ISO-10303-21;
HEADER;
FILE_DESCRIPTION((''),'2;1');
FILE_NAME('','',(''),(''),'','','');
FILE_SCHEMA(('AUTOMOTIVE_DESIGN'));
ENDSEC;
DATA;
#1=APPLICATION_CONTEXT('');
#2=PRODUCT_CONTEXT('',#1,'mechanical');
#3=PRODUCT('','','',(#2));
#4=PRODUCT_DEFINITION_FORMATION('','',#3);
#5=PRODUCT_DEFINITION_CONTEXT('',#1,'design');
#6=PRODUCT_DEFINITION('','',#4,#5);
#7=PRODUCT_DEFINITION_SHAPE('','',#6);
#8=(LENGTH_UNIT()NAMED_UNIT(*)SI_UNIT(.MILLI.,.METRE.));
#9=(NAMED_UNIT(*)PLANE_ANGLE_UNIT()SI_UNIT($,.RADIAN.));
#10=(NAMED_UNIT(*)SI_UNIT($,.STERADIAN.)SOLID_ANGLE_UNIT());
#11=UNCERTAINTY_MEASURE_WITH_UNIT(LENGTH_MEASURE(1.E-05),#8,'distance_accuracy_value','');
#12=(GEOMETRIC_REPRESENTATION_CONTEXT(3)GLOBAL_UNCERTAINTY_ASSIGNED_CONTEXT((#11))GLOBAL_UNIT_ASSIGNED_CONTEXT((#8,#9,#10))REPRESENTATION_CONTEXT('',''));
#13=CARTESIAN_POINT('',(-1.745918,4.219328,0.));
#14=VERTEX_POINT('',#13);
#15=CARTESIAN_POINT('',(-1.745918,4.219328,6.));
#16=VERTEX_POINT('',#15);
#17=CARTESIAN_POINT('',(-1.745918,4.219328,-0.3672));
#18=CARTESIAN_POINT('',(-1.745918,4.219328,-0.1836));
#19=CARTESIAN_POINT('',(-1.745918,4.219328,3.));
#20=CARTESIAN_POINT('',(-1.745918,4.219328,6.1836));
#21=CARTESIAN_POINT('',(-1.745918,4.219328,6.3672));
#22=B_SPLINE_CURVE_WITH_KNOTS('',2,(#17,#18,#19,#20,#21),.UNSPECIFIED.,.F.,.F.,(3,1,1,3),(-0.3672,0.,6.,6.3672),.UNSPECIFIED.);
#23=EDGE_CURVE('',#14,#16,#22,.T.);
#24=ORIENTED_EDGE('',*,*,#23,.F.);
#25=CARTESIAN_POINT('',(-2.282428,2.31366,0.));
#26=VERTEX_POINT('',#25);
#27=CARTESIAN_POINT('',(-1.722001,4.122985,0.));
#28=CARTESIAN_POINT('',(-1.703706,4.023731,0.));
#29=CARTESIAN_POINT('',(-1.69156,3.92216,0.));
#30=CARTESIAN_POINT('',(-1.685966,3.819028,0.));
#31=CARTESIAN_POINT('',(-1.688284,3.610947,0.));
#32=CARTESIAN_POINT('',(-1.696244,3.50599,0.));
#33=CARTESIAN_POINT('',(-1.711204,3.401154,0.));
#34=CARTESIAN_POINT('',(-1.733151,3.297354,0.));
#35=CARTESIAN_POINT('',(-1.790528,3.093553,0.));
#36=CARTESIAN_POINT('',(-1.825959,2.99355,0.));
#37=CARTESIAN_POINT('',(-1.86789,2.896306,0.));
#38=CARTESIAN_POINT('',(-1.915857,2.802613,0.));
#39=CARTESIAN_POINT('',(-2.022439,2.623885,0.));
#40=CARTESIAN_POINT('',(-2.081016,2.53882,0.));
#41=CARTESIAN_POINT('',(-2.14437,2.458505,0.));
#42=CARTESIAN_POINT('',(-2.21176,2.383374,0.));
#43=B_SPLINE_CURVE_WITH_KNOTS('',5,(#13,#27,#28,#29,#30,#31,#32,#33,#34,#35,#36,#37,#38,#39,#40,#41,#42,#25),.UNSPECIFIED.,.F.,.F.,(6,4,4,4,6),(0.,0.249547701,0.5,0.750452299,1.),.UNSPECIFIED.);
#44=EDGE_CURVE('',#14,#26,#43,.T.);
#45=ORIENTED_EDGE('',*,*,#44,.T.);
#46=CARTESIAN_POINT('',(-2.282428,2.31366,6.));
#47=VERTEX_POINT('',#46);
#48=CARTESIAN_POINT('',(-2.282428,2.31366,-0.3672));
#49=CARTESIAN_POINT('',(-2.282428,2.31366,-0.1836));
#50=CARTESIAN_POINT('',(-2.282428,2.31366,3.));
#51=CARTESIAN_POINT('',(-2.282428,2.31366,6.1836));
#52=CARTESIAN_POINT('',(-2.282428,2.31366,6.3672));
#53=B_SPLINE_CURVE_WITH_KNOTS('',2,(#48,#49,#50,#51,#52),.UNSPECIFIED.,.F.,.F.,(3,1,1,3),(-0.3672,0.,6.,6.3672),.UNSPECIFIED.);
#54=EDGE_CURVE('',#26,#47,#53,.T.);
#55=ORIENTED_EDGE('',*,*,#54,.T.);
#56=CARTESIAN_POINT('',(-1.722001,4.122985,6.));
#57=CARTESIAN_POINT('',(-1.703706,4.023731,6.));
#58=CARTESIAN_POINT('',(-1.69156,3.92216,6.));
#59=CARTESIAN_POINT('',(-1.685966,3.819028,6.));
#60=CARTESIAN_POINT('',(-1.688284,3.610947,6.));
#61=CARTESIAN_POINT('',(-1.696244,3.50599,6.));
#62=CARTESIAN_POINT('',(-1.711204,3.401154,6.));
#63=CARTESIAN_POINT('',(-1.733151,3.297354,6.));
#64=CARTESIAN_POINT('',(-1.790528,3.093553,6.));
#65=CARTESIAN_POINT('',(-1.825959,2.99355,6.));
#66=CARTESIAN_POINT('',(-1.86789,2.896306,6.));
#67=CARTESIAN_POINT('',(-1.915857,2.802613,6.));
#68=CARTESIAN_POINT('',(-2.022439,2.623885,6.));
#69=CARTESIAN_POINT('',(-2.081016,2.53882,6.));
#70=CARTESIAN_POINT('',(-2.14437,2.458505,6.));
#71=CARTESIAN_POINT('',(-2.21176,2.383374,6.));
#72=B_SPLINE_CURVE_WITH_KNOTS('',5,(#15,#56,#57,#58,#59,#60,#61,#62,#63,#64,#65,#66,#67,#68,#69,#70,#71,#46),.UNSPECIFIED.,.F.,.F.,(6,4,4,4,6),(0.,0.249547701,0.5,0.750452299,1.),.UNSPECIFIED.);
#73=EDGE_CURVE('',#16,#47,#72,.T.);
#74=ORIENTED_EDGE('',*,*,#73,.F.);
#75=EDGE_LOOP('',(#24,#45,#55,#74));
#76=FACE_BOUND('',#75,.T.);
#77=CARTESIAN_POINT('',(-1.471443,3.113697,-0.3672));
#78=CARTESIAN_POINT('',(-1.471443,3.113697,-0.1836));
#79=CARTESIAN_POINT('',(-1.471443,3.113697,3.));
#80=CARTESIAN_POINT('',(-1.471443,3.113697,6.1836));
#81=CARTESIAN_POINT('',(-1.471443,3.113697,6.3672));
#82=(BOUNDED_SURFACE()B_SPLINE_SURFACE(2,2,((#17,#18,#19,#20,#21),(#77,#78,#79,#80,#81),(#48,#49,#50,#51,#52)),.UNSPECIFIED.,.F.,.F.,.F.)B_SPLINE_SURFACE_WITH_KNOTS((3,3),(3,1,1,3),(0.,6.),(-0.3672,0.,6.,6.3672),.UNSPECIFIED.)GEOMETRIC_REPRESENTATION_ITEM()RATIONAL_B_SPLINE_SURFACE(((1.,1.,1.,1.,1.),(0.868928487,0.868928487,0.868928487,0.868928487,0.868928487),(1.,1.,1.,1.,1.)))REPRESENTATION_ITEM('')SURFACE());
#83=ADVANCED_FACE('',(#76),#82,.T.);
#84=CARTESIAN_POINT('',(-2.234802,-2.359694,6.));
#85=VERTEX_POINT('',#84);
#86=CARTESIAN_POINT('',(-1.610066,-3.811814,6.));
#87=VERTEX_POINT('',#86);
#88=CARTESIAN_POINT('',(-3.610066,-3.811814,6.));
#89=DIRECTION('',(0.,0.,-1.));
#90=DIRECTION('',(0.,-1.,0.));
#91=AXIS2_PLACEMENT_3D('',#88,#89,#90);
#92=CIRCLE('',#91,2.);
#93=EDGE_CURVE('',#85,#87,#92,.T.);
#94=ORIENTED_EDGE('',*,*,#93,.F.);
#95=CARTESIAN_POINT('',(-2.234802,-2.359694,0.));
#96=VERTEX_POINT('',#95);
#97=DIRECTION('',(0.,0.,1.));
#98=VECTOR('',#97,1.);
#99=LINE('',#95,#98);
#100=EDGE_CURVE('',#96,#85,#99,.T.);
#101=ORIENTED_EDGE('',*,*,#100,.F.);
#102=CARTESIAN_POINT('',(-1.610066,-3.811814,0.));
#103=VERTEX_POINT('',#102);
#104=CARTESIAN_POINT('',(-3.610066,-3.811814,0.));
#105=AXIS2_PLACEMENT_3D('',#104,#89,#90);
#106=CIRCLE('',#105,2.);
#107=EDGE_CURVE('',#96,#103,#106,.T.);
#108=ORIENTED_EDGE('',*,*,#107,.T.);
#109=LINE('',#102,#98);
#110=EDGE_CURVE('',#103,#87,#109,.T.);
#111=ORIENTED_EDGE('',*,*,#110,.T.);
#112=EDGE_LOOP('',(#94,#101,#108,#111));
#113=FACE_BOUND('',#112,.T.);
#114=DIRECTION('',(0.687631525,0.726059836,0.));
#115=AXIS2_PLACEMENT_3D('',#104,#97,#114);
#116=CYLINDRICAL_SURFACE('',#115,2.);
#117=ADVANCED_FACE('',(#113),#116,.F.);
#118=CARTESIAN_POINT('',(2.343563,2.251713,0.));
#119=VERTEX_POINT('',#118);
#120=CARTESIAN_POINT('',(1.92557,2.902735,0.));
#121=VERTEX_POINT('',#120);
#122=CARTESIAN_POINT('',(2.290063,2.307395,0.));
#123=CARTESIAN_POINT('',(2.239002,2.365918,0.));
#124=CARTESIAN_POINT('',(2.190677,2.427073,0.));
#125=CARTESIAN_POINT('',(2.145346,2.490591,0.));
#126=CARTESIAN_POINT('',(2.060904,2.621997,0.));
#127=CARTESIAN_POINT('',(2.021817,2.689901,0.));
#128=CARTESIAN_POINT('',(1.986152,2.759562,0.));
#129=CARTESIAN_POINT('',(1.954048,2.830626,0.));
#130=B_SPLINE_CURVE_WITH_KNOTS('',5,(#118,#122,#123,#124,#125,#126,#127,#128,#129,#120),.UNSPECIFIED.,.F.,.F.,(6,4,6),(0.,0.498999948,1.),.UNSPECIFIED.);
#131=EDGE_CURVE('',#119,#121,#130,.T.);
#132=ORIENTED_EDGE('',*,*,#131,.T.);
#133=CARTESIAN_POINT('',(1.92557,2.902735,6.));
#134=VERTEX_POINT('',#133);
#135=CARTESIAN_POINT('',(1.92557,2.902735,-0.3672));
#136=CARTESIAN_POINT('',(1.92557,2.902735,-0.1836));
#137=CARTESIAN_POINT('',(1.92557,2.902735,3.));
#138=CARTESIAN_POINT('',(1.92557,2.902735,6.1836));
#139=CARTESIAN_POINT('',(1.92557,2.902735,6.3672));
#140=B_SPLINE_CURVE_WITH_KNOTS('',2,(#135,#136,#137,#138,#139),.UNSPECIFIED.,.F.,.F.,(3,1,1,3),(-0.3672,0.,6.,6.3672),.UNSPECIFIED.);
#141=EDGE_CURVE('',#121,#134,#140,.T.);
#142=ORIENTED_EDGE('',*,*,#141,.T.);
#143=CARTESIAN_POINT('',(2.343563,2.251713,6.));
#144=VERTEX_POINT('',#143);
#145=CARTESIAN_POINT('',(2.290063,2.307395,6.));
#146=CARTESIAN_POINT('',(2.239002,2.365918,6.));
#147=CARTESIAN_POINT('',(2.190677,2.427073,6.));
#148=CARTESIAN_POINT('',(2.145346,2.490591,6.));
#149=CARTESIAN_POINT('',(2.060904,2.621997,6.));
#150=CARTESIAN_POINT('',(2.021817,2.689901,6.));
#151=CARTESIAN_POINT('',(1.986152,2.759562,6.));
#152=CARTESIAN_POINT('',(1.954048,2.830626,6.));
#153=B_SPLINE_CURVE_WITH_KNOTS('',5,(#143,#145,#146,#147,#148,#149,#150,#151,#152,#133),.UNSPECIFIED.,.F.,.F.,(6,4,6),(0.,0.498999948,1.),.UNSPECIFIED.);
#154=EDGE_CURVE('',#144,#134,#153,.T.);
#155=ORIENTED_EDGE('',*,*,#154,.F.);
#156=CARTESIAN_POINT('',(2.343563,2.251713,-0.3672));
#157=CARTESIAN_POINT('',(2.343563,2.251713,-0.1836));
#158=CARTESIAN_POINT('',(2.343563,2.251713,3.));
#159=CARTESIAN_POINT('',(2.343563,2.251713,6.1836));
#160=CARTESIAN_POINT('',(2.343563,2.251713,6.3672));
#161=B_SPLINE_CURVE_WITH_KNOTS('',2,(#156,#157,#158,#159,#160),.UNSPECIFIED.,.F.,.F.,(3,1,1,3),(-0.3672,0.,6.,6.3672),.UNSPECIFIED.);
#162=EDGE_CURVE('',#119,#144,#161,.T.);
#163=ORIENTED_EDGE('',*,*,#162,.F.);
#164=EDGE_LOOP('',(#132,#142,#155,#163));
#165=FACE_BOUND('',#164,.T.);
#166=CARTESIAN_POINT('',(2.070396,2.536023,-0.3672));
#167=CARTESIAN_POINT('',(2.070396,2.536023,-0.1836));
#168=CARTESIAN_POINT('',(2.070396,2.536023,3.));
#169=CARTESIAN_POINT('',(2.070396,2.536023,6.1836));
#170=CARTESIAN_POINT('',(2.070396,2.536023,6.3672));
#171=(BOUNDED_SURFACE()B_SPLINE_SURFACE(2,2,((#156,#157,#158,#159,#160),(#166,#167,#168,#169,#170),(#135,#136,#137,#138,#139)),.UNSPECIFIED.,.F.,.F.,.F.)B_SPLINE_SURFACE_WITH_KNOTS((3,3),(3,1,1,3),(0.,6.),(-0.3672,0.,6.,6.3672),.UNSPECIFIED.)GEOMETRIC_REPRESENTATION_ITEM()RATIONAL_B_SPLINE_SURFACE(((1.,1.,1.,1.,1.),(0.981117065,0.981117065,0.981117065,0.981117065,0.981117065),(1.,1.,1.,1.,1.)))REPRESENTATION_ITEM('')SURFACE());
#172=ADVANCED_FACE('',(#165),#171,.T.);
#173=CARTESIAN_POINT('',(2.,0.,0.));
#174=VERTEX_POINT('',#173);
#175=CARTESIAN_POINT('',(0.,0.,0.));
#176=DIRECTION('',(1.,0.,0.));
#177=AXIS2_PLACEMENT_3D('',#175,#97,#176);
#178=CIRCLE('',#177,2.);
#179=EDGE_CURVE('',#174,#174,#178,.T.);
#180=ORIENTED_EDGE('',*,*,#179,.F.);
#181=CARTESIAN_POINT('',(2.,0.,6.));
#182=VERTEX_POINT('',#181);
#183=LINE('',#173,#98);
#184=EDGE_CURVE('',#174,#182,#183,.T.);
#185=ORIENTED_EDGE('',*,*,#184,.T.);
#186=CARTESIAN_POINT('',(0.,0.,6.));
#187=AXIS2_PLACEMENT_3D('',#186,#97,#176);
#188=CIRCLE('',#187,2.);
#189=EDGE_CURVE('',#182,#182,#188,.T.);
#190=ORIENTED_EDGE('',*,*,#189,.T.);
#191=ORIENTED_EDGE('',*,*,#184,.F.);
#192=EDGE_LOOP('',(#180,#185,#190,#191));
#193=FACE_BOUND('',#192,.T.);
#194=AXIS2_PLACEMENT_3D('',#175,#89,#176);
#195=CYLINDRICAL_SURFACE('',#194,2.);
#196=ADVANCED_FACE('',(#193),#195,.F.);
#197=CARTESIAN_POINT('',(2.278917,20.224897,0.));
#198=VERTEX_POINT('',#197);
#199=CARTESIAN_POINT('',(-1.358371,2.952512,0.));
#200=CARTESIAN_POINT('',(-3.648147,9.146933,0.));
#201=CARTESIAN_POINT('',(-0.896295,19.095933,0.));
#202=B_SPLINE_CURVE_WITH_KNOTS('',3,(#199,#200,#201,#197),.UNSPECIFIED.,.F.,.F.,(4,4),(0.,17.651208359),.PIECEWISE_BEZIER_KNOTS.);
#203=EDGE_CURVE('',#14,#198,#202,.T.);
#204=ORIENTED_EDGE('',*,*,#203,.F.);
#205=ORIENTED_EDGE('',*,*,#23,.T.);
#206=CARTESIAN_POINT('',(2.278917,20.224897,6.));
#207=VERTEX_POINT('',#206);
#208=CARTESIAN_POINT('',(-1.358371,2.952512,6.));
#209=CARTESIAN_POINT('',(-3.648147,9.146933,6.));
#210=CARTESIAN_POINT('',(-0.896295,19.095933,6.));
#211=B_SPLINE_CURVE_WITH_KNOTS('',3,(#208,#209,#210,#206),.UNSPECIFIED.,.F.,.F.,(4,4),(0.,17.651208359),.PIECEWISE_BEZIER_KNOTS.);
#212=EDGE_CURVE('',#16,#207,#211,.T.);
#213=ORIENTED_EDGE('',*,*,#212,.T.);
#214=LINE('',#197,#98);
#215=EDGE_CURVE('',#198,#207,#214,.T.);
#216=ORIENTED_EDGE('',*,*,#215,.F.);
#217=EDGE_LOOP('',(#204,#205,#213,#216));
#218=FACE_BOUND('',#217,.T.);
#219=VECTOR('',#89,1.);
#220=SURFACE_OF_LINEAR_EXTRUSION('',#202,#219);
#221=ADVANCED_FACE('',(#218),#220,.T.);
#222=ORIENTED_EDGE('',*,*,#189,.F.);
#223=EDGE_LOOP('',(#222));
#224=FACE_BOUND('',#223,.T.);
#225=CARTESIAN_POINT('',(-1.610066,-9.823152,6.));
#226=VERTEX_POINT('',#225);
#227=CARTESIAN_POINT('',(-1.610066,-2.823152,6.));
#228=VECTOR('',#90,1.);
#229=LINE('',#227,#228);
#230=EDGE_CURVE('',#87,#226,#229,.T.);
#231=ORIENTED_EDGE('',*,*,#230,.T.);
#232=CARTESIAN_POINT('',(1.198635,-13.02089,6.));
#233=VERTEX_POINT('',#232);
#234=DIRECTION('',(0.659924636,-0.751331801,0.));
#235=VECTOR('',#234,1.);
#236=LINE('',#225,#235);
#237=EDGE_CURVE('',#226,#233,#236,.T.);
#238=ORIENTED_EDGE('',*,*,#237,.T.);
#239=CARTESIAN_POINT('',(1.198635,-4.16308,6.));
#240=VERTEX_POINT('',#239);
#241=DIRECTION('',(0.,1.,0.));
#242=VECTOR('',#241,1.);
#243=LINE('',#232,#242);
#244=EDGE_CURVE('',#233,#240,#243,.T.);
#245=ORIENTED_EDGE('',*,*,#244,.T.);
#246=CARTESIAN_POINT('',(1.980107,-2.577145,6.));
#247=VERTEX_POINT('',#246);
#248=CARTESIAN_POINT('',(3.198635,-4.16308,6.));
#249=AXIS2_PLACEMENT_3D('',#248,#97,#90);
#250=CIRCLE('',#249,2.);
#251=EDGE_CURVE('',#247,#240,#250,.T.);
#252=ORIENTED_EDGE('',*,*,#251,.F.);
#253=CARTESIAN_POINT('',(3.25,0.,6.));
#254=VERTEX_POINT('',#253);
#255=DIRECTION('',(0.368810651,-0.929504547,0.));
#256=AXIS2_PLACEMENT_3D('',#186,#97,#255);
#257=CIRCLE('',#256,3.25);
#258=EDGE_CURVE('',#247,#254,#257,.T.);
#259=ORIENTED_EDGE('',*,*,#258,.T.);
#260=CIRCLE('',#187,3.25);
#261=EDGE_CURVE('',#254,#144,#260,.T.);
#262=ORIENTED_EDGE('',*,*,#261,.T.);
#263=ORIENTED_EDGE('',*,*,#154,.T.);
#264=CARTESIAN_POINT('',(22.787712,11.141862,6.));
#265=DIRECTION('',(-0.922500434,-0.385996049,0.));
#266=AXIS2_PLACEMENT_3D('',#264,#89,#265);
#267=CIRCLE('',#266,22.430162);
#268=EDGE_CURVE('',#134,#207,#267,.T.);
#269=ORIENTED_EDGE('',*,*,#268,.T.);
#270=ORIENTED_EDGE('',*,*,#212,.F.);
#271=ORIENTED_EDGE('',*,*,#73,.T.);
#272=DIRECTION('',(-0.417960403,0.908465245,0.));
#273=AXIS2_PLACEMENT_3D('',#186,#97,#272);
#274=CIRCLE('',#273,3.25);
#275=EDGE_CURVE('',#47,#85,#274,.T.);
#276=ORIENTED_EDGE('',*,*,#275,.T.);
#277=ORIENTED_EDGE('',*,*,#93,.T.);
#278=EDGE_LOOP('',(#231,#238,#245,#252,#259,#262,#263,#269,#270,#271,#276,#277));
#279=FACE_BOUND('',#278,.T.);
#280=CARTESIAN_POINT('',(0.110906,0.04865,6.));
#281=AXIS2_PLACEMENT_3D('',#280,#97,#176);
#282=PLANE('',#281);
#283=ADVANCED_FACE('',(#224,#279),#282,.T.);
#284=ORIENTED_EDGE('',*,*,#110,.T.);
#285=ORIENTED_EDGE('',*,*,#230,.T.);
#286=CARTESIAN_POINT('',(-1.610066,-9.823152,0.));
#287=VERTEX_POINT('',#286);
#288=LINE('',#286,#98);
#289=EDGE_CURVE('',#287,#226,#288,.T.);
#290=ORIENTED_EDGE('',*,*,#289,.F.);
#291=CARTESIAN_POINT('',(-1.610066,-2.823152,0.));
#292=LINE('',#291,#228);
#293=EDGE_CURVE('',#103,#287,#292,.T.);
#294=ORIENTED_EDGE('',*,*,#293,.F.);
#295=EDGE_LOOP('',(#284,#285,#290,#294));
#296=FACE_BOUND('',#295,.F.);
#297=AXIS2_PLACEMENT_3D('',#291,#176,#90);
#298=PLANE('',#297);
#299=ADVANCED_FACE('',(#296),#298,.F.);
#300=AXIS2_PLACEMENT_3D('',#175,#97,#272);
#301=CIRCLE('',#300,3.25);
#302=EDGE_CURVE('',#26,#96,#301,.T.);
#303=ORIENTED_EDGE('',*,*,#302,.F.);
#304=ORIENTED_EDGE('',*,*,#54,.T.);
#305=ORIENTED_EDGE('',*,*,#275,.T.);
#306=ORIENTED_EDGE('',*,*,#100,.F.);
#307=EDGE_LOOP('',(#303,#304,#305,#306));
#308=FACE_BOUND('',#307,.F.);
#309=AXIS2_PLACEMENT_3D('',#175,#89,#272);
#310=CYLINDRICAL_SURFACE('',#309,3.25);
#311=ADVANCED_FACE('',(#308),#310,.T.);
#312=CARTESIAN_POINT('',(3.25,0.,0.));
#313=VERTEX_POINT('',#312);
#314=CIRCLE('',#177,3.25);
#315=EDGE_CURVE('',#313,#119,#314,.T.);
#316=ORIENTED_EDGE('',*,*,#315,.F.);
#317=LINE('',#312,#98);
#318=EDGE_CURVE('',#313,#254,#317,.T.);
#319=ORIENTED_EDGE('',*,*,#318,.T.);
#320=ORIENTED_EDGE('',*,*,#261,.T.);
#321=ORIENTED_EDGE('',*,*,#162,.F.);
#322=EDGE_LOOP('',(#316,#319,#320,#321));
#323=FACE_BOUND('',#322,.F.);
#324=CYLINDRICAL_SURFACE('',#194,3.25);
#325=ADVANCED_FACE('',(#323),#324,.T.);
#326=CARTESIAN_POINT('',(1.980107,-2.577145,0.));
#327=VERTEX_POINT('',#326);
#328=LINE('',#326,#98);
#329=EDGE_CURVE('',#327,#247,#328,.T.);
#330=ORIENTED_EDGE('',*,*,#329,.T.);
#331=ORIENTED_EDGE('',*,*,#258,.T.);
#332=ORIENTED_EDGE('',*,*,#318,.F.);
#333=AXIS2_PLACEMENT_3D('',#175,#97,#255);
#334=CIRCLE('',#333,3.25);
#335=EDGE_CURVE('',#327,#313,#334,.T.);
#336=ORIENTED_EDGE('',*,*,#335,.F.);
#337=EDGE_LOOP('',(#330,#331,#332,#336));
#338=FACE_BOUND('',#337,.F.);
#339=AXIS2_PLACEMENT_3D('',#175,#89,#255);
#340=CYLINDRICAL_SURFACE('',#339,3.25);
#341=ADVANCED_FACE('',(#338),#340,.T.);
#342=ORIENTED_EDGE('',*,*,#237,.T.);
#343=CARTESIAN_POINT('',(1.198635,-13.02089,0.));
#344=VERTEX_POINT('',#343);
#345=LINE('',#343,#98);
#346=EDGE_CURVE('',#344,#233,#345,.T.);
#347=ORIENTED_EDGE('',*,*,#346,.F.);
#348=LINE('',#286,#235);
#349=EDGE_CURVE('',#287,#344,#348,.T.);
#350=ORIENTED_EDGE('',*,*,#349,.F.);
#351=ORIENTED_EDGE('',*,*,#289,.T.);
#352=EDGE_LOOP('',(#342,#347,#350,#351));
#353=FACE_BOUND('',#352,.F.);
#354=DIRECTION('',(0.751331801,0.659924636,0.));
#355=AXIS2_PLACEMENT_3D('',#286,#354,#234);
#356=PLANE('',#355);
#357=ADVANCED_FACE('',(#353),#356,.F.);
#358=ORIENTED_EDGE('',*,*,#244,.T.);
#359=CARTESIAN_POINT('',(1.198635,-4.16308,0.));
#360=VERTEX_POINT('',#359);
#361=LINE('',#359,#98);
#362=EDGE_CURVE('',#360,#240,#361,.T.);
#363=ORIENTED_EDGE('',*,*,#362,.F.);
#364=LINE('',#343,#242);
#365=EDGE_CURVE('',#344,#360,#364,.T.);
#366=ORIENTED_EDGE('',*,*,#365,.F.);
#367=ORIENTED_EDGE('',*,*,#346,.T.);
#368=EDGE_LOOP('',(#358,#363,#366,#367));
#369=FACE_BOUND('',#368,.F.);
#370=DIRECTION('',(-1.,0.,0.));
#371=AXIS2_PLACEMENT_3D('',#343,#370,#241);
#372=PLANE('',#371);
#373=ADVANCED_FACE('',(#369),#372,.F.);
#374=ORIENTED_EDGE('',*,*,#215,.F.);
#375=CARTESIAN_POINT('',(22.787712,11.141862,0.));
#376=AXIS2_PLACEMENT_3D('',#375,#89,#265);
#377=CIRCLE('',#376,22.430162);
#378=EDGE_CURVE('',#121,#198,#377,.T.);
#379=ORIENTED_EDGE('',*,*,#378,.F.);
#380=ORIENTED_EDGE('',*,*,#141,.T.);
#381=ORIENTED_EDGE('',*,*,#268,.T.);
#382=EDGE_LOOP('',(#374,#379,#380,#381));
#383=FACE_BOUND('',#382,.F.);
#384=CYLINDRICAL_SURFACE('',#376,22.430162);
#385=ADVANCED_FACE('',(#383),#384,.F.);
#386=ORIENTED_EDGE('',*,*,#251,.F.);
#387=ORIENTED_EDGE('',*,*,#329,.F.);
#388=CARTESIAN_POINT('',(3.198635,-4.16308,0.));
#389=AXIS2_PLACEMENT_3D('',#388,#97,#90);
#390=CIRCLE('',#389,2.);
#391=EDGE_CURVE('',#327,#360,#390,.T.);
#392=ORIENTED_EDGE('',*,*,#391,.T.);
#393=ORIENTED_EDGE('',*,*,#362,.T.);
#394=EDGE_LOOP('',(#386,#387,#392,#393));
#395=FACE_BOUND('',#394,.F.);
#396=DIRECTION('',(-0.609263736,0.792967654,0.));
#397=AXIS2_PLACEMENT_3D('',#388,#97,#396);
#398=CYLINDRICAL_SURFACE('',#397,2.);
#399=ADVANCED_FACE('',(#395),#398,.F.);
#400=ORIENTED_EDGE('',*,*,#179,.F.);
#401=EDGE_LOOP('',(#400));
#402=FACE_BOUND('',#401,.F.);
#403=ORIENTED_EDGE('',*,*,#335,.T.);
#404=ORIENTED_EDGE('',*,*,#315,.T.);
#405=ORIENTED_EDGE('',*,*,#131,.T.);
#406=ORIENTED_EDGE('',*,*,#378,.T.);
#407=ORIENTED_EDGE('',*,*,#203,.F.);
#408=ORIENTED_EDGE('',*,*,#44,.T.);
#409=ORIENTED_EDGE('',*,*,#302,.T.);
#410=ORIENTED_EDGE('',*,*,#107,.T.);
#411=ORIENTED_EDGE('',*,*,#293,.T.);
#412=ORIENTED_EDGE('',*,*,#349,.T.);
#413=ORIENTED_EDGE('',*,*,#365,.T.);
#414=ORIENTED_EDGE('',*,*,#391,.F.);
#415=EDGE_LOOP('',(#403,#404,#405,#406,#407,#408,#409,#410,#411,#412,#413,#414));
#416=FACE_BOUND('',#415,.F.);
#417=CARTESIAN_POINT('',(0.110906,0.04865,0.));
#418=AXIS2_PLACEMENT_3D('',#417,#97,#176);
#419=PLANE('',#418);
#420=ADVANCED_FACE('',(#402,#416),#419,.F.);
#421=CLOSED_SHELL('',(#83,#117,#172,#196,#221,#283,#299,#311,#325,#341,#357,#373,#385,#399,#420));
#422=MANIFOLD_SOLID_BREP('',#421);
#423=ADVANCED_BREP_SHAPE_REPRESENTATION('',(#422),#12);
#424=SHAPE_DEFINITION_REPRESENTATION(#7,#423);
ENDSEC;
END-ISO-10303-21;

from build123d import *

# Parameters (mm, degrees)
F0_R     = 2
F1_DEPTH = 6
F2_R     = 2


# Not quite as in the source:
# - a feature names something its author has since deleted; it is built from what else it names


with BuildPart() as f1:
    # F0 (on Top) → F1 (new body)
    with BuildSketch(Plane.XY):
        with BuildLine():
            ThreePointArc((1.1986346156, -3.0208897792), (2.688685785, -1.8257789432), (3.25, 0))
            ThreePointArc((3.25, 0), (2.9473803034, 1.3694704624), (2.0958773247, 2.4839078565))
            ThreePointArc((2.0958773247, 2.4839078565), (0.4368938689, 3.220500543), (-1.3583713088, 2.952512047))
            ThreePointArc((-1.3583713088, 2.952512047), (-3.2469183887, 0.1414955013), (-1.6100655086, -2.8231523264))
            ThreePointArc((-1.6100655086, -2.8231523264), (-0.2282408158, -3.2419756523), (1.1986346156, -3.0208897792))
        make_face()
        Circle(F0_R, mode=Mode.SUBTRACT)
        with BuildLine():
            Line((1.1986346156, -13.0208897792), (1.1986346156, -3.0208897792))
            ThreePointArc((1.1986346156, -3.0208897792), (-0.2282408158, -3.2419756523), (-1.6100655086, -2.8231523264))
            Line((-1.6100655086, -2.8231523264), (-1.6100655086, -9.8231523264))
            Line((-1.6100655086, -9.8231523264), (1.1986346156, -13.0208897792))
        make_face()
        with BuildLine():
            ThreePointArc((-1.3583713088, 2.952512047), (0.4368938689, 3.220500543), (2.0958773247, 2.4839078565))
            ThreePointArc((2.0958773247, 2.4839078565), (0.3587431794, 11.3732693794), (2.2789172363, 20.2248971909))
            add(Edge.make_bspline(
                [(-1.3583713088, 2.952512047), (-3.6481465213, 9.1469325125), (-0.8962951833, 19.0959330648), (2.2789172363, 20.2248971909)],
                knots=[0, 0, 0, 0, 17.6512083587, 17.6512083587, 17.6512083587, 17.6512083587], degree=3))
        make_face()
    extrude(amount=F1_DEPTH)

    # F2
    f2_edges = [f1.edges().sort_by_distance(p)[0] for p in [
        (-1.610066, -2.823152, 3),
        (1.198635, -3.02089, 3),
        (-1.358371, 2.952512, 3),
        (2.095877, 2.483908, 3),
    ]]
    fillet(f2_edges, radius=F2_R)


solid = f1.part
